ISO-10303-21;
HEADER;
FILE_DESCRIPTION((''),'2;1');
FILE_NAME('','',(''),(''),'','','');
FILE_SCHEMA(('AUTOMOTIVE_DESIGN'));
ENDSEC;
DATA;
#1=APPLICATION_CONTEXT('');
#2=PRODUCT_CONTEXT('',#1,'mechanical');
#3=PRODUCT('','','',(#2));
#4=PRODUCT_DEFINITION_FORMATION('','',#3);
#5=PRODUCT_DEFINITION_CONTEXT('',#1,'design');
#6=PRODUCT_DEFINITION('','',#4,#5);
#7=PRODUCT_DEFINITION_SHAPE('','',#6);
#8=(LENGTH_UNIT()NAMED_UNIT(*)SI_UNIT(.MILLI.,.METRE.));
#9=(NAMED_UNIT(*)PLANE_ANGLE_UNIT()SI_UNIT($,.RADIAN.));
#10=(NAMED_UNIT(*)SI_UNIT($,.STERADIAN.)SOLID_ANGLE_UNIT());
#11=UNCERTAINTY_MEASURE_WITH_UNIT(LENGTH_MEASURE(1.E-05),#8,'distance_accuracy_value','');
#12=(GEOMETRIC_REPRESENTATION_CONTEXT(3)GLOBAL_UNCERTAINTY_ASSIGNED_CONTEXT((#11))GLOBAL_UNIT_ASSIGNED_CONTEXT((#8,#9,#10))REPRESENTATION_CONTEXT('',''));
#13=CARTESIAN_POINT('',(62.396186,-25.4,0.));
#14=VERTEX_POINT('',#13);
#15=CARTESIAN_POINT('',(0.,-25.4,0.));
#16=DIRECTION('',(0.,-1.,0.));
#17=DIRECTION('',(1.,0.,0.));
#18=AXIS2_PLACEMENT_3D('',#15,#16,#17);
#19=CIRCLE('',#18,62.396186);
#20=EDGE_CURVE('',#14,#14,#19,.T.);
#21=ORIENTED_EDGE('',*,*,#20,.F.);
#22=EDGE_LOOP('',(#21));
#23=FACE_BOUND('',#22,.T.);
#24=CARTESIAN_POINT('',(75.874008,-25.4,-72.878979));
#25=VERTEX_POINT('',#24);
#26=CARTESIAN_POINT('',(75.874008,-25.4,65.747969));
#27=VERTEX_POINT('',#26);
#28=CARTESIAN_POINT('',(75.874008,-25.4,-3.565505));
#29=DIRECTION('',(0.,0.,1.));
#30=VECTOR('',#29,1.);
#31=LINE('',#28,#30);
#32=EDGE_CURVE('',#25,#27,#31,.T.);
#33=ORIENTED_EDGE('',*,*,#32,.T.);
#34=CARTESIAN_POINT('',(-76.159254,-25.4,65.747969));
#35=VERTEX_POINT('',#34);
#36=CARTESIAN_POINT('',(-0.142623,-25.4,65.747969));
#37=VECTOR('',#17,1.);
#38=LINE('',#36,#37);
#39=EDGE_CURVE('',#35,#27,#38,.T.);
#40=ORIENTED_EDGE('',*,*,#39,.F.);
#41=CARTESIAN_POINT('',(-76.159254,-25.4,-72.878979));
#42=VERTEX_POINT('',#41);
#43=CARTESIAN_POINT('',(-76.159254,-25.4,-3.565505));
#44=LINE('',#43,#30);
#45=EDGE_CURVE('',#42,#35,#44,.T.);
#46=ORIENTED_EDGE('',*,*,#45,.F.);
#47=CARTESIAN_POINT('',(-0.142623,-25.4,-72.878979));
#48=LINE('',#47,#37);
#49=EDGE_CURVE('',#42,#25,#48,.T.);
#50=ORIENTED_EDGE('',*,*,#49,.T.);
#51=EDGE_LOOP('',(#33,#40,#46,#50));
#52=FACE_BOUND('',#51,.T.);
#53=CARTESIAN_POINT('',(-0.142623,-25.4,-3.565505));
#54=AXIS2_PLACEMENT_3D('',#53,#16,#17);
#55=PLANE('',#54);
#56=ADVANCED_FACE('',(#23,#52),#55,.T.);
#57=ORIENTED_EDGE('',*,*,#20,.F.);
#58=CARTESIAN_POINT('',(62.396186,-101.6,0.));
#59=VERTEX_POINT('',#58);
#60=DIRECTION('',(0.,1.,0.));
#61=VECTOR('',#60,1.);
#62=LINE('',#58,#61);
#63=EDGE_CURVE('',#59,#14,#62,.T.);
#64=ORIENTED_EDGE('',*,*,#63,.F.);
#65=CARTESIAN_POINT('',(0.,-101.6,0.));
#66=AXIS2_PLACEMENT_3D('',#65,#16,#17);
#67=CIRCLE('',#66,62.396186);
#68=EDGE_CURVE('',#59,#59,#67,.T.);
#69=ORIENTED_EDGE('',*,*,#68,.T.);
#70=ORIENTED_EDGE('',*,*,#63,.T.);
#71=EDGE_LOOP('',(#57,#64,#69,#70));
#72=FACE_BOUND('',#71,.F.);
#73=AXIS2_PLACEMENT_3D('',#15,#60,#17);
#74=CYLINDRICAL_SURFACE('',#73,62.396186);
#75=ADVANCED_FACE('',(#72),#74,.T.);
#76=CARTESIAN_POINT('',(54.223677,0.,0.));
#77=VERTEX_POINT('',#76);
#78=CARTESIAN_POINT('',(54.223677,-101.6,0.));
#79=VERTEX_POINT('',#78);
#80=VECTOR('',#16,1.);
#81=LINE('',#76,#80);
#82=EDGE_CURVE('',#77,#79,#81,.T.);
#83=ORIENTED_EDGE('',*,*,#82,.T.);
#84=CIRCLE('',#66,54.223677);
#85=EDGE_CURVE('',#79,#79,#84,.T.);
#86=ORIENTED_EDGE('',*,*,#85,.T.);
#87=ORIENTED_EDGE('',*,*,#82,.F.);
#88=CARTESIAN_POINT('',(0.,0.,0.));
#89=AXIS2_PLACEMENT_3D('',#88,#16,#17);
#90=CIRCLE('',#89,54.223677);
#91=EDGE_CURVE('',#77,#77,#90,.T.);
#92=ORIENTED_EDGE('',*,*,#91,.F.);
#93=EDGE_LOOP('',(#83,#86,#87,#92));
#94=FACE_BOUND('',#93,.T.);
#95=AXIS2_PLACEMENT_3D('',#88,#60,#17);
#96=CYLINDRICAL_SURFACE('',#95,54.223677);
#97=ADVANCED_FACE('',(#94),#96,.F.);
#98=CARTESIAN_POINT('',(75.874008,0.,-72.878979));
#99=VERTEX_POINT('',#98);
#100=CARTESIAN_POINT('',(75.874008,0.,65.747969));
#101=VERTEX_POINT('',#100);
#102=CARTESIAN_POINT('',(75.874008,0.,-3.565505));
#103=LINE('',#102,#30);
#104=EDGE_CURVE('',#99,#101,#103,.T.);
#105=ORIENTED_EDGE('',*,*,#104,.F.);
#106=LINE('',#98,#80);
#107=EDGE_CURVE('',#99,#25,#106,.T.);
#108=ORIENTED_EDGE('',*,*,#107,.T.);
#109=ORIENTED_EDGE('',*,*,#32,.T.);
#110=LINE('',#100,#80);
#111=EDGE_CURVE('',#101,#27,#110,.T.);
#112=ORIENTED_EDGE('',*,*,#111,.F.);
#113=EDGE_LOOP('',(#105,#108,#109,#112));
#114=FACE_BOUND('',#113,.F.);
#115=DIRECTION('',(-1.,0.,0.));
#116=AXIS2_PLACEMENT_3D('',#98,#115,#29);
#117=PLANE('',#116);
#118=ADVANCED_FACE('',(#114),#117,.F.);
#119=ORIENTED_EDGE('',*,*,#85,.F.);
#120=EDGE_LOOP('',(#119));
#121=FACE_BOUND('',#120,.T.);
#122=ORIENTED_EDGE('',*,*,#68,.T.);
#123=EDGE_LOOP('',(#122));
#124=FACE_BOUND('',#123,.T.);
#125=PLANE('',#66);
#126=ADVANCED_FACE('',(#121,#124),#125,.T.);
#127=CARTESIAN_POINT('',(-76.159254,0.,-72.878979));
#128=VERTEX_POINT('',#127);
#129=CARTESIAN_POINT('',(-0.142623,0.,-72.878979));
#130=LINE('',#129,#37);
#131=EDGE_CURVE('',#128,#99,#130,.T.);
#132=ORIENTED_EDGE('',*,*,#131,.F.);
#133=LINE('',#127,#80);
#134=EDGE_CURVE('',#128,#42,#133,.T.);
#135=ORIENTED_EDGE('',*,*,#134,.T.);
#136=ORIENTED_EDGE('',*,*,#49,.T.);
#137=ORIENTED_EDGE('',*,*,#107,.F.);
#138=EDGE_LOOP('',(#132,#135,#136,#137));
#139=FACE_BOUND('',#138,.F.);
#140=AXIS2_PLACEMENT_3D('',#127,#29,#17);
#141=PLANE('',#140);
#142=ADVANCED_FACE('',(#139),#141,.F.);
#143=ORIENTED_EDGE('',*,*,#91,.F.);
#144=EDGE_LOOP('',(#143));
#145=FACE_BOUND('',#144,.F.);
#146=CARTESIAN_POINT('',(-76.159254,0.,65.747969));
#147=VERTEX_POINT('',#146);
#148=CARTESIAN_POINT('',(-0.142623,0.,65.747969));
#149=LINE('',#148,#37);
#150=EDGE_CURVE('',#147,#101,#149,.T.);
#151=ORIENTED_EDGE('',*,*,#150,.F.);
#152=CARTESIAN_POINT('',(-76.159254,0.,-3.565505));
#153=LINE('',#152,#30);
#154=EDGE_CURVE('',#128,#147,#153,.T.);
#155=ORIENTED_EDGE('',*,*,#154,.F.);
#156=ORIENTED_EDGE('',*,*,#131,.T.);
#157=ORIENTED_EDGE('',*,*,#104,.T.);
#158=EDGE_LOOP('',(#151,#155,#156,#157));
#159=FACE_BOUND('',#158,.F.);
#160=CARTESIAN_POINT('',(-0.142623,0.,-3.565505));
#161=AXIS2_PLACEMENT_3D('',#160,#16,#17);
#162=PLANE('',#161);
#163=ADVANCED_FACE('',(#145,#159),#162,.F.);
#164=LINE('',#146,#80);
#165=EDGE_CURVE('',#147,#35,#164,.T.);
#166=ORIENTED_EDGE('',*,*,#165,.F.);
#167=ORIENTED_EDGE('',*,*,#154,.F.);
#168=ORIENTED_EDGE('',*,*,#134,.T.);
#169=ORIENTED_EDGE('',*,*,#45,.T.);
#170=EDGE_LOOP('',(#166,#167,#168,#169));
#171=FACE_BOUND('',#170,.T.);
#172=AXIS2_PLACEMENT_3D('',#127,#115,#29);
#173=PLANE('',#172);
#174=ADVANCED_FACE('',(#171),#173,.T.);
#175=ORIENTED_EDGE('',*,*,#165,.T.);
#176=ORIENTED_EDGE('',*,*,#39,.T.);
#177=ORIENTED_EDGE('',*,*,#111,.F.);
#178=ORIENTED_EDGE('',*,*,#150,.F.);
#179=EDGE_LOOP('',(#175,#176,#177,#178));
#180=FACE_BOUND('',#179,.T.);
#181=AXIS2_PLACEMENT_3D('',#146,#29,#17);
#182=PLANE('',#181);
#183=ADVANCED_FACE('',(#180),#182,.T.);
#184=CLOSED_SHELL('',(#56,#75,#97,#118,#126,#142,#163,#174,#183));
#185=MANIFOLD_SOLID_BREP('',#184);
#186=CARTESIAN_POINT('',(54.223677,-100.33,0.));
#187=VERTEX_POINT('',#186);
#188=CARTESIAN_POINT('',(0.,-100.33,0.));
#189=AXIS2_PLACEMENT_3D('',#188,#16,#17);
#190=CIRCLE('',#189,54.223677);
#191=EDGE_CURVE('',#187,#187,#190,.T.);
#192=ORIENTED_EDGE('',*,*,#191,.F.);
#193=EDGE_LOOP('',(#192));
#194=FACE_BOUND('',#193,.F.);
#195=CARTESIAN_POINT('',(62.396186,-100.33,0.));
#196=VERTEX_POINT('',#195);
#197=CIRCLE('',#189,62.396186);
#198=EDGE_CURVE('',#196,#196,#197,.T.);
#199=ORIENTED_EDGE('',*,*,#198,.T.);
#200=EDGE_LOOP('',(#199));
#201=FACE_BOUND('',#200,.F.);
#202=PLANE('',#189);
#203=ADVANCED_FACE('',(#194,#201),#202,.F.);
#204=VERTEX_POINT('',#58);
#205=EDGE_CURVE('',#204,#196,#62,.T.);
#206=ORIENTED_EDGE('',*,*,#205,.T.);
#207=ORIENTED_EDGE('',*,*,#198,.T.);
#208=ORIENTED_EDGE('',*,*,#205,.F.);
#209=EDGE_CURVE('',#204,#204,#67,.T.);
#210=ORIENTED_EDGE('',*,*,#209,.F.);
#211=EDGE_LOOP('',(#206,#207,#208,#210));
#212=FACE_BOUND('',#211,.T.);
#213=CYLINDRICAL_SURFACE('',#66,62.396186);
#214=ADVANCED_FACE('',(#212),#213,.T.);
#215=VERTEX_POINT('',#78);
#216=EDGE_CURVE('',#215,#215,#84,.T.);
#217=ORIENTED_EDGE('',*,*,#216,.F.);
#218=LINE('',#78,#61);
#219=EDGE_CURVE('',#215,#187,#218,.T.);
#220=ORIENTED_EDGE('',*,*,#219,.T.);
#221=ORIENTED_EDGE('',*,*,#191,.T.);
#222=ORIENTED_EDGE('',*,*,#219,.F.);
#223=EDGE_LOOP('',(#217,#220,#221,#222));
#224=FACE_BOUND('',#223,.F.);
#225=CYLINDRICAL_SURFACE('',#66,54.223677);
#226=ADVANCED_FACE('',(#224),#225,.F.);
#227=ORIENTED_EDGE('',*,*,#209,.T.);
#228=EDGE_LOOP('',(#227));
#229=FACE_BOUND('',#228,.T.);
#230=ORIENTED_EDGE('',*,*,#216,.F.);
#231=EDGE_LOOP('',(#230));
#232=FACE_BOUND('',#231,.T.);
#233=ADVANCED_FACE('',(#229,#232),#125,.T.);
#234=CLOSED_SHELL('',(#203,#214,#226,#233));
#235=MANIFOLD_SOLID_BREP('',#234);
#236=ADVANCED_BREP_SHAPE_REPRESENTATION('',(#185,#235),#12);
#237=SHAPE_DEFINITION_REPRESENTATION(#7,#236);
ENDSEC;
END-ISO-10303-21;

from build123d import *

# Parameters (mm, degrees)
F0_R        = 62.3961855018
F0_R_2      = 54.2236772846
F1_DEPTH    = 25.4
F2_DEPTH    = 50.8
F0_W        = 152.0332619548
F0_H        = 138.626947999
F2_FACE_R   = 62.3961855018
F2_FACE_R_2 = 54.2236772846
F3_DEPTH    = 25.4
F4_DEPTH    = 1.27


with BuildPart() as f1:
    # F0 (on Front) → F1 (new body)
    with BuildSketch(Plane.XZ):
        Circle(F0_R)
        Circle(F0_R_2, mode=Mode.SUBTRACT)
    extrude(amount=F1_DEPTH)

    # F2 (add): faces of the model
    f2_faces = [f1.faces().sort_by_distance(p)[0] for p in [
        (-60.6313548663, -25.4, 0),
        (-60.6313548663, 0, 0),
    ]]
    extrude(f2_faces, amount=F2_DEPTH, dir=(0, -1, 0))

    # F0 (on Front) + F2_face (on face) → F3 (join)
    with BuildSketch(Plane.XZ):
        with Locations((-0.1426227391, -3.565505147)):
            Rectangle(F0_W, F0_H)
        Circle(F0_R, mode=Mode.SUBTRACT)
    with BuildSketch(Plane.XZ.offset(76.2)):
        Circle(F2_FACE_R)
        Circle(F2_FACE_R_2, mode=Mode.SUBTRACT)
    extrude(amount=F3_DEPTH)


with BuildPart() as f4:
    # F4 (new): a face of the model
    f4_faces = [f1.part.faces().sort_by_distance(p)[0] for p in [
        (-60.6313548663, -101.6, 0),
    ]]
    extrude(f4_faces, amount=-F4_DEPTH)


solid = Compound([f1.part, f4.part])
